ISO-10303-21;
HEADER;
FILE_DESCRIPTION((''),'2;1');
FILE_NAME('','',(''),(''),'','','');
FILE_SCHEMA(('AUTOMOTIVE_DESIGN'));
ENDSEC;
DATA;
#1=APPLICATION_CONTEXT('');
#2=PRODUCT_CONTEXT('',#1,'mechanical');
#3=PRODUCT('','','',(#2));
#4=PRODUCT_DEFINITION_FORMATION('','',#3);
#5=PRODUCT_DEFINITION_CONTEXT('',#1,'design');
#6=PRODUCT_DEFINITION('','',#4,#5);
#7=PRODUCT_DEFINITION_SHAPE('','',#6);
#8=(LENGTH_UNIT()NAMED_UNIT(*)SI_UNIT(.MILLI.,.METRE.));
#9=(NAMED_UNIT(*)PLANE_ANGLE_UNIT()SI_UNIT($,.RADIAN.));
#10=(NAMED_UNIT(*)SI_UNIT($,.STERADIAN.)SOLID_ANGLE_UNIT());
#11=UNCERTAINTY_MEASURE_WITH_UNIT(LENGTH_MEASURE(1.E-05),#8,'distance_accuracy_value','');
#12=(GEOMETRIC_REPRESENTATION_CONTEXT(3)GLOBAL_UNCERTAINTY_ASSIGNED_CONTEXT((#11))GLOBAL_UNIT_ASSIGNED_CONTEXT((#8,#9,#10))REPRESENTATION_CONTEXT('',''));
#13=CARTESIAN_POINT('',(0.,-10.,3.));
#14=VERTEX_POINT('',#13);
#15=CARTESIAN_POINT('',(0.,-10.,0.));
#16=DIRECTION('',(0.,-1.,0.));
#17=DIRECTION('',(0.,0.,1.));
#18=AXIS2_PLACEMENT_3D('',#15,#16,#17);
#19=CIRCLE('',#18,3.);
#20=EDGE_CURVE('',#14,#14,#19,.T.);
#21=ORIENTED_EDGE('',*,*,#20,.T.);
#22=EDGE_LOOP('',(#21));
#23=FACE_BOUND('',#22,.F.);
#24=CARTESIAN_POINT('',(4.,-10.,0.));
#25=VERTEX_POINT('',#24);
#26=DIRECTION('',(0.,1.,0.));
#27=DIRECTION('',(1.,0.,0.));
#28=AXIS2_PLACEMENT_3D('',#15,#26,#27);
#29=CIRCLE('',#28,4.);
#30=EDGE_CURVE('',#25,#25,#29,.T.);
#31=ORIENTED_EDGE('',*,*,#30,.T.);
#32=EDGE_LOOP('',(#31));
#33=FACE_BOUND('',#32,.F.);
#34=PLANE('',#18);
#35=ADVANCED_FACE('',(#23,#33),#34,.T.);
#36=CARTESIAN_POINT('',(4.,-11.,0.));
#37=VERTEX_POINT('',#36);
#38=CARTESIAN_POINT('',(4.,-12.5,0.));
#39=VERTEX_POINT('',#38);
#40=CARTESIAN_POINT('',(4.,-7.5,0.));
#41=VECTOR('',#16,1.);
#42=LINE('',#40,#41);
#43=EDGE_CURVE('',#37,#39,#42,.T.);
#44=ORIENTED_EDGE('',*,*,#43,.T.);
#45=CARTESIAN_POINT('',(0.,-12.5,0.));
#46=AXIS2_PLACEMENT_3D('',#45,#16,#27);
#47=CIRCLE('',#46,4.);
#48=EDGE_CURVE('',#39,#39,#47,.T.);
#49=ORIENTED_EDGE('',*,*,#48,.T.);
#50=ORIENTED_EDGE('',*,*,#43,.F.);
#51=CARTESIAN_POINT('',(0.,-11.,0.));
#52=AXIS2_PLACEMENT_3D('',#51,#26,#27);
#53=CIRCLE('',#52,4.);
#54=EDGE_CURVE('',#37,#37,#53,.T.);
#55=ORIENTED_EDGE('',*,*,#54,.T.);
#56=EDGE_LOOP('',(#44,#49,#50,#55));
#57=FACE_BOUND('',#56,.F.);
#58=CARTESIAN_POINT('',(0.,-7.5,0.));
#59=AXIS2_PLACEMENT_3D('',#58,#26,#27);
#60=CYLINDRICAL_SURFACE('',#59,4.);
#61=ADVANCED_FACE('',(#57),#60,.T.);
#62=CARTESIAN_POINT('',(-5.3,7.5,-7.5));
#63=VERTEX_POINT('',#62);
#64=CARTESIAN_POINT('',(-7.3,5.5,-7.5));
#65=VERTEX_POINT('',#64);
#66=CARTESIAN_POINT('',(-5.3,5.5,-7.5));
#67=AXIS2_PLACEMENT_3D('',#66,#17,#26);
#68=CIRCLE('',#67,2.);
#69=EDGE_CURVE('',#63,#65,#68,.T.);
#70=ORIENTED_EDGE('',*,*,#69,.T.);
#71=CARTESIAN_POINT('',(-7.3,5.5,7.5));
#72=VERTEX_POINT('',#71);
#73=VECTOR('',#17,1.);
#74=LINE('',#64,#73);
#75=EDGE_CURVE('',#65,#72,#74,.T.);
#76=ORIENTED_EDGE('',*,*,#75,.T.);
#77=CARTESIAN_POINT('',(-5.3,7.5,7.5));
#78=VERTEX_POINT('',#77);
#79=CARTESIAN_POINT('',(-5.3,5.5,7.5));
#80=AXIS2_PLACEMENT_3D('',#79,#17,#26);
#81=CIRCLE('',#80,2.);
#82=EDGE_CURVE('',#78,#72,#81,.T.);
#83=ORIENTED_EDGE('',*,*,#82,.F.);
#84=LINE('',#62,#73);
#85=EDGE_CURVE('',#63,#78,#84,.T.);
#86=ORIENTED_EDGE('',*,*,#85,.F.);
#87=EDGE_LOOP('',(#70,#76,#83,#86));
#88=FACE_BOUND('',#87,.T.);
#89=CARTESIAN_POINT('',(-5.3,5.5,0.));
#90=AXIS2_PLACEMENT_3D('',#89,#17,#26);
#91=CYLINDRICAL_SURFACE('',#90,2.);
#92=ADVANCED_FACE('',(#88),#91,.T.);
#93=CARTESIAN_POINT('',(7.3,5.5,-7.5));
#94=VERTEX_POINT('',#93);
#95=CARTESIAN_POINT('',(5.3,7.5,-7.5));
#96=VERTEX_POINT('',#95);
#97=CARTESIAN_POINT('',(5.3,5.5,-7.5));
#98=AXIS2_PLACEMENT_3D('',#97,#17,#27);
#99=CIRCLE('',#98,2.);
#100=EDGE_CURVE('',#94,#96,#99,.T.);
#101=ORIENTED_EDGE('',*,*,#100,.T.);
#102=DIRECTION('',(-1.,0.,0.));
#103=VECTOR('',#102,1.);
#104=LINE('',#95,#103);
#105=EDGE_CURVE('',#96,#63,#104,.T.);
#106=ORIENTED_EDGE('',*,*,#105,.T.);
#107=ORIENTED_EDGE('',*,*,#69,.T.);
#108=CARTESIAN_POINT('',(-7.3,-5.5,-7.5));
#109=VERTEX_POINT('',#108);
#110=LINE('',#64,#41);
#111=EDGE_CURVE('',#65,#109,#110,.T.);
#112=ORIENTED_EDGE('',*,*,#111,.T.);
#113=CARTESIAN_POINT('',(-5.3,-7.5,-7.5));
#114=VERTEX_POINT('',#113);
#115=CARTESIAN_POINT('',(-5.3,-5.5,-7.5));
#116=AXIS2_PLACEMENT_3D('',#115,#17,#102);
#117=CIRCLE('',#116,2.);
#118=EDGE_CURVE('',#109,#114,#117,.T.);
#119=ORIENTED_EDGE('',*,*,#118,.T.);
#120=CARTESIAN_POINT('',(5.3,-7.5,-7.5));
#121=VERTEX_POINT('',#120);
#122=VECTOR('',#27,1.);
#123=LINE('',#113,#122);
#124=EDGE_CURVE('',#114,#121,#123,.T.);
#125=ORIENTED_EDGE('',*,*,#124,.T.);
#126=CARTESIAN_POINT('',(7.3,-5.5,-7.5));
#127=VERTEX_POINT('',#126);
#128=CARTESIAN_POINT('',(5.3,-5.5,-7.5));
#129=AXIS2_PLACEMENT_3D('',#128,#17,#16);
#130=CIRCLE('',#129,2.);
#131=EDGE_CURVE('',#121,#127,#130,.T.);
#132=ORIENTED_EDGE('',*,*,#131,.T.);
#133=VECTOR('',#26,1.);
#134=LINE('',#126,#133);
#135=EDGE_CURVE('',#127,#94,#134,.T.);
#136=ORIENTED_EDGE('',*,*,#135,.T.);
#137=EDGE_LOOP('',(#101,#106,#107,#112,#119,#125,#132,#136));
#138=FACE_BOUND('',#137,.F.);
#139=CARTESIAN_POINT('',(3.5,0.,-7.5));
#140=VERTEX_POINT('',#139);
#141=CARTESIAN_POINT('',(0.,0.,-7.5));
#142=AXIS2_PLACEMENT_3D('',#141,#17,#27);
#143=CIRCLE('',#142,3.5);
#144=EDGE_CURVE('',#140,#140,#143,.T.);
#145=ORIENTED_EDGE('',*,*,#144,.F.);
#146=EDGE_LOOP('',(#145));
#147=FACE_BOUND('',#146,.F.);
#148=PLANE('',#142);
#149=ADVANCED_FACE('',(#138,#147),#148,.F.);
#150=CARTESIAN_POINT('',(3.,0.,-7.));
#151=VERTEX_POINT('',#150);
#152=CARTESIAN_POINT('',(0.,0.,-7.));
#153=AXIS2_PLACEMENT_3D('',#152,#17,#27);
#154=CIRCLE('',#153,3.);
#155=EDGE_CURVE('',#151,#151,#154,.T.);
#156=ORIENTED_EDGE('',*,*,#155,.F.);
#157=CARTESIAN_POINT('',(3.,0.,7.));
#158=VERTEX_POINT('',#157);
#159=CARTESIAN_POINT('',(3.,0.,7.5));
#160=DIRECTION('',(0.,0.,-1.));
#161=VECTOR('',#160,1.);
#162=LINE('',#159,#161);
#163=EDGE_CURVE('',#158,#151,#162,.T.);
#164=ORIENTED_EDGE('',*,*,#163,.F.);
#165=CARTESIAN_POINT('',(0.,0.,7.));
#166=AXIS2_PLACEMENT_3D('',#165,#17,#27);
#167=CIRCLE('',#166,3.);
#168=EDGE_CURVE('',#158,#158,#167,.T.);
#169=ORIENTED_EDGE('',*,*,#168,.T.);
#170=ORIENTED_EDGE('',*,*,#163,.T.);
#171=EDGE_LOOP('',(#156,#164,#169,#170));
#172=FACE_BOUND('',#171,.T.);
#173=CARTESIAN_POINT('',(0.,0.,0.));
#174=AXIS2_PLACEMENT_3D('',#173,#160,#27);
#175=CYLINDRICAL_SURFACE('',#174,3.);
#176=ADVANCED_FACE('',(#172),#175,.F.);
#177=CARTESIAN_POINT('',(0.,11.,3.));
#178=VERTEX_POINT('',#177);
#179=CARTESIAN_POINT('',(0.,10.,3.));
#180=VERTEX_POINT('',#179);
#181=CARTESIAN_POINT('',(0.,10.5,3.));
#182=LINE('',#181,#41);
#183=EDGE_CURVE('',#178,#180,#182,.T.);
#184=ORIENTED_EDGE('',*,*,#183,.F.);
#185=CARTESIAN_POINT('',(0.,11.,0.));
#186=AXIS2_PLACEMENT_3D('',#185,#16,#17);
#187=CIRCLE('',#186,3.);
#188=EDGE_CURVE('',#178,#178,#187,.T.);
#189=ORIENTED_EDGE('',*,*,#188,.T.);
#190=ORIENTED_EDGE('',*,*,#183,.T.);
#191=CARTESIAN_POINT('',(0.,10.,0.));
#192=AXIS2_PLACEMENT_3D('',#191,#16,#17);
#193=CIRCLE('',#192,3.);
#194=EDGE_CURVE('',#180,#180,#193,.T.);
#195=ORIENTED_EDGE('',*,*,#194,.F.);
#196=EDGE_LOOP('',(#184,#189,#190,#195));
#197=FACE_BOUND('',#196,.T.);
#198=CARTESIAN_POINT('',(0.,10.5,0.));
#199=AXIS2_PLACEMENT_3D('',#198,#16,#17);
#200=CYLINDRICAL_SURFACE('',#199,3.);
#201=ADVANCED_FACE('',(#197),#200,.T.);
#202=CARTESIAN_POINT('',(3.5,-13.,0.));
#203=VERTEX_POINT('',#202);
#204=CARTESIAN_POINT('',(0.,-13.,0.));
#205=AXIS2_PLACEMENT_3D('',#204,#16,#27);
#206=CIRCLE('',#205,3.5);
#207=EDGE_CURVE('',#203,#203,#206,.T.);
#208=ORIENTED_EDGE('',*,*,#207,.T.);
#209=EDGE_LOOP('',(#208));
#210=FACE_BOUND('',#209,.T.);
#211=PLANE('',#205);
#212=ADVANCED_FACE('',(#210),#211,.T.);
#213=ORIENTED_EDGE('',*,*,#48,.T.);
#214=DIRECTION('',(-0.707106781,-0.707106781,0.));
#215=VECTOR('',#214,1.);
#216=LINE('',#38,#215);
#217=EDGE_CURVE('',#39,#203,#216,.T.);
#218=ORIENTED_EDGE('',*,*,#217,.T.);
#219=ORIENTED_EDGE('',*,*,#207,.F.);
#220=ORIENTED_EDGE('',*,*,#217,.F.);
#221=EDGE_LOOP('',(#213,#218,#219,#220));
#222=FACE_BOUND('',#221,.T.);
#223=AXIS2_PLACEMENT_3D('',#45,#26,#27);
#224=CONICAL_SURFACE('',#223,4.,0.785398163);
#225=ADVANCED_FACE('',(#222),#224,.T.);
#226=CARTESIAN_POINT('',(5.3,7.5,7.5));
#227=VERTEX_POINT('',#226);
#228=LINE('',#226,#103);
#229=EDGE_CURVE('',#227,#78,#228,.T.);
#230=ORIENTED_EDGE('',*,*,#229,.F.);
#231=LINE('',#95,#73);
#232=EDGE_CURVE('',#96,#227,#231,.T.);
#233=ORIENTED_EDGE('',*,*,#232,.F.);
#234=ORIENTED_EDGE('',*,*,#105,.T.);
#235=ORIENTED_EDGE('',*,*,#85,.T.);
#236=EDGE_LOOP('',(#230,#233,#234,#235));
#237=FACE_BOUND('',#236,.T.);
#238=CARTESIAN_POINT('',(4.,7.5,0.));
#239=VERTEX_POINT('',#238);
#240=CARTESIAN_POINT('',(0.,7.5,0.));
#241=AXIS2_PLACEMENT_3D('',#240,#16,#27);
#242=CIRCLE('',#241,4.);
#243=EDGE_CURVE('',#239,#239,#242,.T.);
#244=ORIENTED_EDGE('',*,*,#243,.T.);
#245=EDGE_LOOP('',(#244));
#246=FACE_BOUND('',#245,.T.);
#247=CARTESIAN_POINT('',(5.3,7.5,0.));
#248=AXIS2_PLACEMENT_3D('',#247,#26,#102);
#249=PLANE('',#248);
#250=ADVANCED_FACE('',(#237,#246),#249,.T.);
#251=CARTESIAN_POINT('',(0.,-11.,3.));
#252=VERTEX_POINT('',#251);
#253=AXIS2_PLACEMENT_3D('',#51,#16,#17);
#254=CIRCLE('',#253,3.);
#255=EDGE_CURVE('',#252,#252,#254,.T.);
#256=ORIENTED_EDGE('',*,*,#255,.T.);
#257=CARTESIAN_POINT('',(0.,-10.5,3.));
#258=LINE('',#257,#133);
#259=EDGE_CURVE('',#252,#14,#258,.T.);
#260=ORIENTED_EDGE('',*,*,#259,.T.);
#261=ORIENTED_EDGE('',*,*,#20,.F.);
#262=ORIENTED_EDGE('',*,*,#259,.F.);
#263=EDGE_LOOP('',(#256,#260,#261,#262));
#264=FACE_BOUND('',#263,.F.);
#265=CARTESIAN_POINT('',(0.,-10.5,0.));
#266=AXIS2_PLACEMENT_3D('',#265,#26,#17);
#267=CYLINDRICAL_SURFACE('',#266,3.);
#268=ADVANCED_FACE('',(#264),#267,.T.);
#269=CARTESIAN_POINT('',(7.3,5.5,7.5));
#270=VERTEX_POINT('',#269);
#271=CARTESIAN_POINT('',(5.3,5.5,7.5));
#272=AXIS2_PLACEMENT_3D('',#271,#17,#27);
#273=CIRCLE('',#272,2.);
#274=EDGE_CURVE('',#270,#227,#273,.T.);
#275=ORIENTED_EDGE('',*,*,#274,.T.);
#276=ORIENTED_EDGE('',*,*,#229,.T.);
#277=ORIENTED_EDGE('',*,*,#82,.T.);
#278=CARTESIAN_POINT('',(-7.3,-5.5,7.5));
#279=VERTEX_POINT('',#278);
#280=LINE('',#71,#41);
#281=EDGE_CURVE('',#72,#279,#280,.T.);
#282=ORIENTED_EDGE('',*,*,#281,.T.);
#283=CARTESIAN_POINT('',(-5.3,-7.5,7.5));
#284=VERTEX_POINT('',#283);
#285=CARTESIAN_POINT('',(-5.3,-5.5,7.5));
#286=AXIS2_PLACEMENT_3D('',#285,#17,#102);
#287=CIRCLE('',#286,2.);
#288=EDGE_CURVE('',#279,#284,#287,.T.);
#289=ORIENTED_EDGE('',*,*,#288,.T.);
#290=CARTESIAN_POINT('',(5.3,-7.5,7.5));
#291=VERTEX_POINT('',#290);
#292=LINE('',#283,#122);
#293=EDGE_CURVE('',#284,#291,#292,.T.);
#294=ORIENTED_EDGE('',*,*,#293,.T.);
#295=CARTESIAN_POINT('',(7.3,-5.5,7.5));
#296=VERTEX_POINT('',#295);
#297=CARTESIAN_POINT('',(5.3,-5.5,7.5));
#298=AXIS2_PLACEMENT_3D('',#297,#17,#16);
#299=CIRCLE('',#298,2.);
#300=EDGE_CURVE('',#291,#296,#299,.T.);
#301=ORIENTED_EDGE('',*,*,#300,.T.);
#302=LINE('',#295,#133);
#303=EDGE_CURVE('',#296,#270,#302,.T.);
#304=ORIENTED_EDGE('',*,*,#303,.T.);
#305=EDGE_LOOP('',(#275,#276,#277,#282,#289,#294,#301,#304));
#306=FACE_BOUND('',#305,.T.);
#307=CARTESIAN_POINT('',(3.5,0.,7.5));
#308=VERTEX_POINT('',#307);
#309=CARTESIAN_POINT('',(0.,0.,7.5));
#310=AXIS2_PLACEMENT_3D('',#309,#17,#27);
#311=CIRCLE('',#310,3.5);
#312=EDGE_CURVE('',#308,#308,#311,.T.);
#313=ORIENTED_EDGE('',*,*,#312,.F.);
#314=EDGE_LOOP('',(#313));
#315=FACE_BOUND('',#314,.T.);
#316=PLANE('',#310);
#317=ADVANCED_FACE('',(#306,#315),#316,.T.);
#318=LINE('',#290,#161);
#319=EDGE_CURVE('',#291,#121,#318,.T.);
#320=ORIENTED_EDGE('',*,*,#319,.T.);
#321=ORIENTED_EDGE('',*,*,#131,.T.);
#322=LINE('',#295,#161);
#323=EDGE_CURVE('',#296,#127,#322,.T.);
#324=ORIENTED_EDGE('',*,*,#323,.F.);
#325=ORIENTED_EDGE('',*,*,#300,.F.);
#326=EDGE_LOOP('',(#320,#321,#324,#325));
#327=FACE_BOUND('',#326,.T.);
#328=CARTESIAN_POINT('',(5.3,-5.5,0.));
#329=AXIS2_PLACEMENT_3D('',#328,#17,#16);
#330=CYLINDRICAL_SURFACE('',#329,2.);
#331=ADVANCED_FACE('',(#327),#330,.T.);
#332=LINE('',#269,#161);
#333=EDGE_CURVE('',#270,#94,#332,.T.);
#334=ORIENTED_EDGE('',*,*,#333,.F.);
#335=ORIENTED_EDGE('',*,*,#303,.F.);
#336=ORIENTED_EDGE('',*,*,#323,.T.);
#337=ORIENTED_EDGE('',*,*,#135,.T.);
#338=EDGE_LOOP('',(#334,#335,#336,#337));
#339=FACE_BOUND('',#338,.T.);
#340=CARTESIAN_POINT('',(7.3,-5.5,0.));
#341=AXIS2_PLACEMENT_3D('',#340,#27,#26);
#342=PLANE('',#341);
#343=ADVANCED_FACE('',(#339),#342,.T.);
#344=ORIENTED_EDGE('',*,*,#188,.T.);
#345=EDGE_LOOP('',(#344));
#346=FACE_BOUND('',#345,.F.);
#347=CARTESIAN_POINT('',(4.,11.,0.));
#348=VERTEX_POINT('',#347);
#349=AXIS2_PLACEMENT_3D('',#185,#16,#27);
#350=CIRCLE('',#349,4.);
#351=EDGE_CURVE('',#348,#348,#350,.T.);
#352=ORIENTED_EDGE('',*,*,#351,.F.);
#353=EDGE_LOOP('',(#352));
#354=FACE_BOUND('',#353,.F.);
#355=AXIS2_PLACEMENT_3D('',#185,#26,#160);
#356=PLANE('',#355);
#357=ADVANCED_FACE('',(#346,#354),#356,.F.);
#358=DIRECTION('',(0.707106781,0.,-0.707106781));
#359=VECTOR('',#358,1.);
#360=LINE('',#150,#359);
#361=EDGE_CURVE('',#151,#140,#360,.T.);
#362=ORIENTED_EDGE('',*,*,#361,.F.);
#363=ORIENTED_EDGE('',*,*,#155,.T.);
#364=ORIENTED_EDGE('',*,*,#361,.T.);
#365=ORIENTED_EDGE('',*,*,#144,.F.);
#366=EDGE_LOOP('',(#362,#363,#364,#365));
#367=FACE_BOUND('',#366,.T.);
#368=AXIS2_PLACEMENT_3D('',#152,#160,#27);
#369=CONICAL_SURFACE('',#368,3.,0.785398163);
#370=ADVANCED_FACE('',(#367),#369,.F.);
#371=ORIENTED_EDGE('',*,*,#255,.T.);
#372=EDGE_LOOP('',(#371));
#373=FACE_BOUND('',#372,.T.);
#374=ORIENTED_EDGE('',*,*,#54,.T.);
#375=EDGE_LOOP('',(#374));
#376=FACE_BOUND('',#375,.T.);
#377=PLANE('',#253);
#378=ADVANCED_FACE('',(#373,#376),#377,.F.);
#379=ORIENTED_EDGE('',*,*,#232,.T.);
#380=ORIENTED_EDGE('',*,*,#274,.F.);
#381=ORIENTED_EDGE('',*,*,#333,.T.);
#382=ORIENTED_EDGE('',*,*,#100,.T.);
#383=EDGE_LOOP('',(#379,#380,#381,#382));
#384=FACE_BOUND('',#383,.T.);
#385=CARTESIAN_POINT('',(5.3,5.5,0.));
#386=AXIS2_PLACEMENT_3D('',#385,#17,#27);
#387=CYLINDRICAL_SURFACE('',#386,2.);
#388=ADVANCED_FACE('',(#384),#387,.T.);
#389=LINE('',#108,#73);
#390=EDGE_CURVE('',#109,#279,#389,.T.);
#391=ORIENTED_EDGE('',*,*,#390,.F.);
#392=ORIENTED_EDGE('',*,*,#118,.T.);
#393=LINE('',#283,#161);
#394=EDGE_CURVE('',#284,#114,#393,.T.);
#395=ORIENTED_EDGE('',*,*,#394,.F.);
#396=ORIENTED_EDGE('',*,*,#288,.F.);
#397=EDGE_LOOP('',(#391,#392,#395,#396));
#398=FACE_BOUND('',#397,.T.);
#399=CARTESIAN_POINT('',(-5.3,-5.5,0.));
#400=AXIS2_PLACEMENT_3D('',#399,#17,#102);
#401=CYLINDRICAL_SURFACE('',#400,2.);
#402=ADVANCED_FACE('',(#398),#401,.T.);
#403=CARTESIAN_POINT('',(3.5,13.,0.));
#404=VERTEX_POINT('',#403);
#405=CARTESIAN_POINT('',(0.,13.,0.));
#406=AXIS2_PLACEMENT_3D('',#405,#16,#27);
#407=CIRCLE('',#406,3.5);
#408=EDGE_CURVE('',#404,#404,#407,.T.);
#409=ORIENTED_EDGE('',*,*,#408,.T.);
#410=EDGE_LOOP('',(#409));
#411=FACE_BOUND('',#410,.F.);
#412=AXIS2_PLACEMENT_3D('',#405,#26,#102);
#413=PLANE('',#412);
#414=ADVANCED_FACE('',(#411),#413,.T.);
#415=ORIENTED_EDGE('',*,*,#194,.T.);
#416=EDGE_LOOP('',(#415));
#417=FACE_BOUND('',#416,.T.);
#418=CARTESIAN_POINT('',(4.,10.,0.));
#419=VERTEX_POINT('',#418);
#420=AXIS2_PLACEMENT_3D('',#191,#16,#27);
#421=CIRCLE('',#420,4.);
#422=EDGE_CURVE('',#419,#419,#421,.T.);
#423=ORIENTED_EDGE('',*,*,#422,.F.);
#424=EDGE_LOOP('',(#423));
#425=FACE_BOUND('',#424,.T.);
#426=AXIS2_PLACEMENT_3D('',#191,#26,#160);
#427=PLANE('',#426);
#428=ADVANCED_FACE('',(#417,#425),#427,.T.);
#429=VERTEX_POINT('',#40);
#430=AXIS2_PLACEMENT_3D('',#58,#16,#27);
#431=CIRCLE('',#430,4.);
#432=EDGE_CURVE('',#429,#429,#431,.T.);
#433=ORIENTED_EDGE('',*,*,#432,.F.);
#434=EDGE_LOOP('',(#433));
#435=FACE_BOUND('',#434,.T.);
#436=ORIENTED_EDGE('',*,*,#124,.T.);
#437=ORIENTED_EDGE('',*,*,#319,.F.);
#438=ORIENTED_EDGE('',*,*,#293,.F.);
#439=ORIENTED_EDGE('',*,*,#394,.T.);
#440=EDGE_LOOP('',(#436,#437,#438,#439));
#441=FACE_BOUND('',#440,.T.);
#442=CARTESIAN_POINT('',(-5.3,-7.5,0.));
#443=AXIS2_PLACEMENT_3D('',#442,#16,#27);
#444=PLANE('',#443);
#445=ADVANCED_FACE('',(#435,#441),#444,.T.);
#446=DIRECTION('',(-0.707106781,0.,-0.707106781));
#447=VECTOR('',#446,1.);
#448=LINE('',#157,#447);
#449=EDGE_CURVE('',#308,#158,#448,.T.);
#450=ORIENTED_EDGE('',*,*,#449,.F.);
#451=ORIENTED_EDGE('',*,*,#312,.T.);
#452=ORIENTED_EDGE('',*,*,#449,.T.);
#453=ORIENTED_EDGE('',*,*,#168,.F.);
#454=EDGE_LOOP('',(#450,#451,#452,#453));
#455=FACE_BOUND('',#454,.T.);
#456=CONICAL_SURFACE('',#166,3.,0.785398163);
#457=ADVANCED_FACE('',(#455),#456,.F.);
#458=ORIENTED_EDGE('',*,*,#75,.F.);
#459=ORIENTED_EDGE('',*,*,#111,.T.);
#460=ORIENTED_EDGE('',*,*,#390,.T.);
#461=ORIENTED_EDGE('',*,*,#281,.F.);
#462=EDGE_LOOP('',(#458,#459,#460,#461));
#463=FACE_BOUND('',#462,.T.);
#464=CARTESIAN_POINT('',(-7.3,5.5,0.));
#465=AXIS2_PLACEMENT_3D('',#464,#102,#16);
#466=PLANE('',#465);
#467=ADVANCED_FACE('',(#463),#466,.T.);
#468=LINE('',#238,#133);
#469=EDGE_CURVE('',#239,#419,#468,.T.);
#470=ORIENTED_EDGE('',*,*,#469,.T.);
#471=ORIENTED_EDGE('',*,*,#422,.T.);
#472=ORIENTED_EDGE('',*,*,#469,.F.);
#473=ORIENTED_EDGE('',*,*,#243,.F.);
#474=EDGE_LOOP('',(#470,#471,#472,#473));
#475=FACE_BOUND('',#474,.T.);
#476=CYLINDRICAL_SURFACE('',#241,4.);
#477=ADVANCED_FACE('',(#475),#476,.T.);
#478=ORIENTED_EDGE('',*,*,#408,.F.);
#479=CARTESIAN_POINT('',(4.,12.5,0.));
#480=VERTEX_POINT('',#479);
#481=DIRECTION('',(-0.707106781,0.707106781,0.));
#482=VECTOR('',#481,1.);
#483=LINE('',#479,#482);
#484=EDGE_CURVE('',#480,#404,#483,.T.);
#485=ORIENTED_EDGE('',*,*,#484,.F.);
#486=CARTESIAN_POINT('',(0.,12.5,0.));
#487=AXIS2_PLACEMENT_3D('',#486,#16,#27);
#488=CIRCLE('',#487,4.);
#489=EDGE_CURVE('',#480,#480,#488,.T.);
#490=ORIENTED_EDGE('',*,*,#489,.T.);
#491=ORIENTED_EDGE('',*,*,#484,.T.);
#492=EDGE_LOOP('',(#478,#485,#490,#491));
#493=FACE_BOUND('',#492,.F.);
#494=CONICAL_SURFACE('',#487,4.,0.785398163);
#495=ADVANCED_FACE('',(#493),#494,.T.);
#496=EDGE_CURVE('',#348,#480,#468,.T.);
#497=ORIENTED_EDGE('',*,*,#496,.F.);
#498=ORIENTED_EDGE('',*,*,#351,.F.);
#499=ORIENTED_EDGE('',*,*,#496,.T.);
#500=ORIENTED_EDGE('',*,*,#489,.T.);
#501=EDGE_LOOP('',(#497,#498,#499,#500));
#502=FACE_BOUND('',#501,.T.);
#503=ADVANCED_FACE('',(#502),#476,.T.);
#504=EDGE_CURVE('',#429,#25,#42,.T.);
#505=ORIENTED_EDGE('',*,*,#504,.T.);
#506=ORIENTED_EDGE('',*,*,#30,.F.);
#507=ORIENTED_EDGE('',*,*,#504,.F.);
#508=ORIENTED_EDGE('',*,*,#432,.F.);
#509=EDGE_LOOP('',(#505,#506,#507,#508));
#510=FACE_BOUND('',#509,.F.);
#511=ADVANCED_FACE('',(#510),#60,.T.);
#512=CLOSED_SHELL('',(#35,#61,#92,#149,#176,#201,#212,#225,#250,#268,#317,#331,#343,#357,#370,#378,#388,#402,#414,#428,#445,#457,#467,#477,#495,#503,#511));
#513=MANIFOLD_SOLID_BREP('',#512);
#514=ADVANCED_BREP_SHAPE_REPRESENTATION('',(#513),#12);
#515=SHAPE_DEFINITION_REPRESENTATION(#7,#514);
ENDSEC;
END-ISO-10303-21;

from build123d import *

# Parameters (mm, degrees)
F0_R     = 3
F1_DEPTH = 7.5
F2_SIZE2 = 0.5
F2_SIZE  = 0.5
F3_R     = 4
F4_DEPTH = 5.5
F5_SIZE2 = 0.5
F5_SIZE  = 0.5
F6_W     = 1
F6_H     = 1


# Not quite as in the source:
# - a feature of the source that left no trace in its solid (it failed there, or was rolled back) is left out
# - a pattern or mirror of a feature is missing from the dataset's text; its kind, count and spacing are read off the source's solid


with BuildPart() as f1:
    # F0 (on Top) → F1 (new body, symmetric)
    with BuildSketch(Plane.XY):
        with BuildLine():
            ThreePointArc((7.3, 5.5), (6.7142135624, 6.9142135624), (5.3, 7.5))
            Line((5.3, 7.5), (-5.3, 7.5))
            ThreePointArc((-5.3, 7.5), (-6.7142135624, 6.9142135624), (-7.3, 5.5))
            Line((-7.3, 5.5), (-7.3, -5.5))
            ThreePointArc((-7.3, -5.5), (-6.7142135624, -6.9142135624), (-5.3, -7.5))
            Line((-5.3, -7.5), (5.3, -7.5))
            ThreePointArc((5.3, -7.5), (6.7142135624, -6.9142135624), (7.3, -5.5))
            Line((7.3, -5.5), (7.3, 5.5))
        make_face()
        Circle(F0_R, mode=Mode.SUBTRACT)
    extrude(amount=F1_DEPTH, both=True)

    # F2
    f2_edges = [f1.edges().sort_by_distance(p)[0] for p in [
        (-3, 0, 7.5),
        (-3, 0, -7.5),
    ]]
    chamfer(f2_edges, length=F2_SIZE, length2=F2_SIZE2)

    # F3 (on face) → F4 (join)
    with BuildSketch(Plane.XZ.offset(7.5)):
        Circle(F3_R)
    f4 = extrude(amount=F4_DEPTH)

    # F4_copies: F4 across plane
    add(f4.mirror(Plane.ZX))

    # F5
    f5_edges = [f1.edges().sort_by_distance(p)[0] for p in [
        (-4, -13, 0),
        (-4, 13, 0),
    ]]
    chamfer(f5_edges, length=F5_SIZE, length2=F5_SIZE2)

    # F6 (on Right) → F7 (revolve, cut)
    with BuildSketch(Plane.YZ):
        with Locations((-10.5, 3.5)):
            Rectangle(F6_W, F6_H)
    f7 = revolve(axis=Axis((0, -13, 0), (0, -1, 0)), mode=Mode.SUBTRACT)

    # F7_copies: F7 across plane
    add(f7.mirror(Plane.ZX), mode=Mode.SUBTRACT)


solid = f1.part
